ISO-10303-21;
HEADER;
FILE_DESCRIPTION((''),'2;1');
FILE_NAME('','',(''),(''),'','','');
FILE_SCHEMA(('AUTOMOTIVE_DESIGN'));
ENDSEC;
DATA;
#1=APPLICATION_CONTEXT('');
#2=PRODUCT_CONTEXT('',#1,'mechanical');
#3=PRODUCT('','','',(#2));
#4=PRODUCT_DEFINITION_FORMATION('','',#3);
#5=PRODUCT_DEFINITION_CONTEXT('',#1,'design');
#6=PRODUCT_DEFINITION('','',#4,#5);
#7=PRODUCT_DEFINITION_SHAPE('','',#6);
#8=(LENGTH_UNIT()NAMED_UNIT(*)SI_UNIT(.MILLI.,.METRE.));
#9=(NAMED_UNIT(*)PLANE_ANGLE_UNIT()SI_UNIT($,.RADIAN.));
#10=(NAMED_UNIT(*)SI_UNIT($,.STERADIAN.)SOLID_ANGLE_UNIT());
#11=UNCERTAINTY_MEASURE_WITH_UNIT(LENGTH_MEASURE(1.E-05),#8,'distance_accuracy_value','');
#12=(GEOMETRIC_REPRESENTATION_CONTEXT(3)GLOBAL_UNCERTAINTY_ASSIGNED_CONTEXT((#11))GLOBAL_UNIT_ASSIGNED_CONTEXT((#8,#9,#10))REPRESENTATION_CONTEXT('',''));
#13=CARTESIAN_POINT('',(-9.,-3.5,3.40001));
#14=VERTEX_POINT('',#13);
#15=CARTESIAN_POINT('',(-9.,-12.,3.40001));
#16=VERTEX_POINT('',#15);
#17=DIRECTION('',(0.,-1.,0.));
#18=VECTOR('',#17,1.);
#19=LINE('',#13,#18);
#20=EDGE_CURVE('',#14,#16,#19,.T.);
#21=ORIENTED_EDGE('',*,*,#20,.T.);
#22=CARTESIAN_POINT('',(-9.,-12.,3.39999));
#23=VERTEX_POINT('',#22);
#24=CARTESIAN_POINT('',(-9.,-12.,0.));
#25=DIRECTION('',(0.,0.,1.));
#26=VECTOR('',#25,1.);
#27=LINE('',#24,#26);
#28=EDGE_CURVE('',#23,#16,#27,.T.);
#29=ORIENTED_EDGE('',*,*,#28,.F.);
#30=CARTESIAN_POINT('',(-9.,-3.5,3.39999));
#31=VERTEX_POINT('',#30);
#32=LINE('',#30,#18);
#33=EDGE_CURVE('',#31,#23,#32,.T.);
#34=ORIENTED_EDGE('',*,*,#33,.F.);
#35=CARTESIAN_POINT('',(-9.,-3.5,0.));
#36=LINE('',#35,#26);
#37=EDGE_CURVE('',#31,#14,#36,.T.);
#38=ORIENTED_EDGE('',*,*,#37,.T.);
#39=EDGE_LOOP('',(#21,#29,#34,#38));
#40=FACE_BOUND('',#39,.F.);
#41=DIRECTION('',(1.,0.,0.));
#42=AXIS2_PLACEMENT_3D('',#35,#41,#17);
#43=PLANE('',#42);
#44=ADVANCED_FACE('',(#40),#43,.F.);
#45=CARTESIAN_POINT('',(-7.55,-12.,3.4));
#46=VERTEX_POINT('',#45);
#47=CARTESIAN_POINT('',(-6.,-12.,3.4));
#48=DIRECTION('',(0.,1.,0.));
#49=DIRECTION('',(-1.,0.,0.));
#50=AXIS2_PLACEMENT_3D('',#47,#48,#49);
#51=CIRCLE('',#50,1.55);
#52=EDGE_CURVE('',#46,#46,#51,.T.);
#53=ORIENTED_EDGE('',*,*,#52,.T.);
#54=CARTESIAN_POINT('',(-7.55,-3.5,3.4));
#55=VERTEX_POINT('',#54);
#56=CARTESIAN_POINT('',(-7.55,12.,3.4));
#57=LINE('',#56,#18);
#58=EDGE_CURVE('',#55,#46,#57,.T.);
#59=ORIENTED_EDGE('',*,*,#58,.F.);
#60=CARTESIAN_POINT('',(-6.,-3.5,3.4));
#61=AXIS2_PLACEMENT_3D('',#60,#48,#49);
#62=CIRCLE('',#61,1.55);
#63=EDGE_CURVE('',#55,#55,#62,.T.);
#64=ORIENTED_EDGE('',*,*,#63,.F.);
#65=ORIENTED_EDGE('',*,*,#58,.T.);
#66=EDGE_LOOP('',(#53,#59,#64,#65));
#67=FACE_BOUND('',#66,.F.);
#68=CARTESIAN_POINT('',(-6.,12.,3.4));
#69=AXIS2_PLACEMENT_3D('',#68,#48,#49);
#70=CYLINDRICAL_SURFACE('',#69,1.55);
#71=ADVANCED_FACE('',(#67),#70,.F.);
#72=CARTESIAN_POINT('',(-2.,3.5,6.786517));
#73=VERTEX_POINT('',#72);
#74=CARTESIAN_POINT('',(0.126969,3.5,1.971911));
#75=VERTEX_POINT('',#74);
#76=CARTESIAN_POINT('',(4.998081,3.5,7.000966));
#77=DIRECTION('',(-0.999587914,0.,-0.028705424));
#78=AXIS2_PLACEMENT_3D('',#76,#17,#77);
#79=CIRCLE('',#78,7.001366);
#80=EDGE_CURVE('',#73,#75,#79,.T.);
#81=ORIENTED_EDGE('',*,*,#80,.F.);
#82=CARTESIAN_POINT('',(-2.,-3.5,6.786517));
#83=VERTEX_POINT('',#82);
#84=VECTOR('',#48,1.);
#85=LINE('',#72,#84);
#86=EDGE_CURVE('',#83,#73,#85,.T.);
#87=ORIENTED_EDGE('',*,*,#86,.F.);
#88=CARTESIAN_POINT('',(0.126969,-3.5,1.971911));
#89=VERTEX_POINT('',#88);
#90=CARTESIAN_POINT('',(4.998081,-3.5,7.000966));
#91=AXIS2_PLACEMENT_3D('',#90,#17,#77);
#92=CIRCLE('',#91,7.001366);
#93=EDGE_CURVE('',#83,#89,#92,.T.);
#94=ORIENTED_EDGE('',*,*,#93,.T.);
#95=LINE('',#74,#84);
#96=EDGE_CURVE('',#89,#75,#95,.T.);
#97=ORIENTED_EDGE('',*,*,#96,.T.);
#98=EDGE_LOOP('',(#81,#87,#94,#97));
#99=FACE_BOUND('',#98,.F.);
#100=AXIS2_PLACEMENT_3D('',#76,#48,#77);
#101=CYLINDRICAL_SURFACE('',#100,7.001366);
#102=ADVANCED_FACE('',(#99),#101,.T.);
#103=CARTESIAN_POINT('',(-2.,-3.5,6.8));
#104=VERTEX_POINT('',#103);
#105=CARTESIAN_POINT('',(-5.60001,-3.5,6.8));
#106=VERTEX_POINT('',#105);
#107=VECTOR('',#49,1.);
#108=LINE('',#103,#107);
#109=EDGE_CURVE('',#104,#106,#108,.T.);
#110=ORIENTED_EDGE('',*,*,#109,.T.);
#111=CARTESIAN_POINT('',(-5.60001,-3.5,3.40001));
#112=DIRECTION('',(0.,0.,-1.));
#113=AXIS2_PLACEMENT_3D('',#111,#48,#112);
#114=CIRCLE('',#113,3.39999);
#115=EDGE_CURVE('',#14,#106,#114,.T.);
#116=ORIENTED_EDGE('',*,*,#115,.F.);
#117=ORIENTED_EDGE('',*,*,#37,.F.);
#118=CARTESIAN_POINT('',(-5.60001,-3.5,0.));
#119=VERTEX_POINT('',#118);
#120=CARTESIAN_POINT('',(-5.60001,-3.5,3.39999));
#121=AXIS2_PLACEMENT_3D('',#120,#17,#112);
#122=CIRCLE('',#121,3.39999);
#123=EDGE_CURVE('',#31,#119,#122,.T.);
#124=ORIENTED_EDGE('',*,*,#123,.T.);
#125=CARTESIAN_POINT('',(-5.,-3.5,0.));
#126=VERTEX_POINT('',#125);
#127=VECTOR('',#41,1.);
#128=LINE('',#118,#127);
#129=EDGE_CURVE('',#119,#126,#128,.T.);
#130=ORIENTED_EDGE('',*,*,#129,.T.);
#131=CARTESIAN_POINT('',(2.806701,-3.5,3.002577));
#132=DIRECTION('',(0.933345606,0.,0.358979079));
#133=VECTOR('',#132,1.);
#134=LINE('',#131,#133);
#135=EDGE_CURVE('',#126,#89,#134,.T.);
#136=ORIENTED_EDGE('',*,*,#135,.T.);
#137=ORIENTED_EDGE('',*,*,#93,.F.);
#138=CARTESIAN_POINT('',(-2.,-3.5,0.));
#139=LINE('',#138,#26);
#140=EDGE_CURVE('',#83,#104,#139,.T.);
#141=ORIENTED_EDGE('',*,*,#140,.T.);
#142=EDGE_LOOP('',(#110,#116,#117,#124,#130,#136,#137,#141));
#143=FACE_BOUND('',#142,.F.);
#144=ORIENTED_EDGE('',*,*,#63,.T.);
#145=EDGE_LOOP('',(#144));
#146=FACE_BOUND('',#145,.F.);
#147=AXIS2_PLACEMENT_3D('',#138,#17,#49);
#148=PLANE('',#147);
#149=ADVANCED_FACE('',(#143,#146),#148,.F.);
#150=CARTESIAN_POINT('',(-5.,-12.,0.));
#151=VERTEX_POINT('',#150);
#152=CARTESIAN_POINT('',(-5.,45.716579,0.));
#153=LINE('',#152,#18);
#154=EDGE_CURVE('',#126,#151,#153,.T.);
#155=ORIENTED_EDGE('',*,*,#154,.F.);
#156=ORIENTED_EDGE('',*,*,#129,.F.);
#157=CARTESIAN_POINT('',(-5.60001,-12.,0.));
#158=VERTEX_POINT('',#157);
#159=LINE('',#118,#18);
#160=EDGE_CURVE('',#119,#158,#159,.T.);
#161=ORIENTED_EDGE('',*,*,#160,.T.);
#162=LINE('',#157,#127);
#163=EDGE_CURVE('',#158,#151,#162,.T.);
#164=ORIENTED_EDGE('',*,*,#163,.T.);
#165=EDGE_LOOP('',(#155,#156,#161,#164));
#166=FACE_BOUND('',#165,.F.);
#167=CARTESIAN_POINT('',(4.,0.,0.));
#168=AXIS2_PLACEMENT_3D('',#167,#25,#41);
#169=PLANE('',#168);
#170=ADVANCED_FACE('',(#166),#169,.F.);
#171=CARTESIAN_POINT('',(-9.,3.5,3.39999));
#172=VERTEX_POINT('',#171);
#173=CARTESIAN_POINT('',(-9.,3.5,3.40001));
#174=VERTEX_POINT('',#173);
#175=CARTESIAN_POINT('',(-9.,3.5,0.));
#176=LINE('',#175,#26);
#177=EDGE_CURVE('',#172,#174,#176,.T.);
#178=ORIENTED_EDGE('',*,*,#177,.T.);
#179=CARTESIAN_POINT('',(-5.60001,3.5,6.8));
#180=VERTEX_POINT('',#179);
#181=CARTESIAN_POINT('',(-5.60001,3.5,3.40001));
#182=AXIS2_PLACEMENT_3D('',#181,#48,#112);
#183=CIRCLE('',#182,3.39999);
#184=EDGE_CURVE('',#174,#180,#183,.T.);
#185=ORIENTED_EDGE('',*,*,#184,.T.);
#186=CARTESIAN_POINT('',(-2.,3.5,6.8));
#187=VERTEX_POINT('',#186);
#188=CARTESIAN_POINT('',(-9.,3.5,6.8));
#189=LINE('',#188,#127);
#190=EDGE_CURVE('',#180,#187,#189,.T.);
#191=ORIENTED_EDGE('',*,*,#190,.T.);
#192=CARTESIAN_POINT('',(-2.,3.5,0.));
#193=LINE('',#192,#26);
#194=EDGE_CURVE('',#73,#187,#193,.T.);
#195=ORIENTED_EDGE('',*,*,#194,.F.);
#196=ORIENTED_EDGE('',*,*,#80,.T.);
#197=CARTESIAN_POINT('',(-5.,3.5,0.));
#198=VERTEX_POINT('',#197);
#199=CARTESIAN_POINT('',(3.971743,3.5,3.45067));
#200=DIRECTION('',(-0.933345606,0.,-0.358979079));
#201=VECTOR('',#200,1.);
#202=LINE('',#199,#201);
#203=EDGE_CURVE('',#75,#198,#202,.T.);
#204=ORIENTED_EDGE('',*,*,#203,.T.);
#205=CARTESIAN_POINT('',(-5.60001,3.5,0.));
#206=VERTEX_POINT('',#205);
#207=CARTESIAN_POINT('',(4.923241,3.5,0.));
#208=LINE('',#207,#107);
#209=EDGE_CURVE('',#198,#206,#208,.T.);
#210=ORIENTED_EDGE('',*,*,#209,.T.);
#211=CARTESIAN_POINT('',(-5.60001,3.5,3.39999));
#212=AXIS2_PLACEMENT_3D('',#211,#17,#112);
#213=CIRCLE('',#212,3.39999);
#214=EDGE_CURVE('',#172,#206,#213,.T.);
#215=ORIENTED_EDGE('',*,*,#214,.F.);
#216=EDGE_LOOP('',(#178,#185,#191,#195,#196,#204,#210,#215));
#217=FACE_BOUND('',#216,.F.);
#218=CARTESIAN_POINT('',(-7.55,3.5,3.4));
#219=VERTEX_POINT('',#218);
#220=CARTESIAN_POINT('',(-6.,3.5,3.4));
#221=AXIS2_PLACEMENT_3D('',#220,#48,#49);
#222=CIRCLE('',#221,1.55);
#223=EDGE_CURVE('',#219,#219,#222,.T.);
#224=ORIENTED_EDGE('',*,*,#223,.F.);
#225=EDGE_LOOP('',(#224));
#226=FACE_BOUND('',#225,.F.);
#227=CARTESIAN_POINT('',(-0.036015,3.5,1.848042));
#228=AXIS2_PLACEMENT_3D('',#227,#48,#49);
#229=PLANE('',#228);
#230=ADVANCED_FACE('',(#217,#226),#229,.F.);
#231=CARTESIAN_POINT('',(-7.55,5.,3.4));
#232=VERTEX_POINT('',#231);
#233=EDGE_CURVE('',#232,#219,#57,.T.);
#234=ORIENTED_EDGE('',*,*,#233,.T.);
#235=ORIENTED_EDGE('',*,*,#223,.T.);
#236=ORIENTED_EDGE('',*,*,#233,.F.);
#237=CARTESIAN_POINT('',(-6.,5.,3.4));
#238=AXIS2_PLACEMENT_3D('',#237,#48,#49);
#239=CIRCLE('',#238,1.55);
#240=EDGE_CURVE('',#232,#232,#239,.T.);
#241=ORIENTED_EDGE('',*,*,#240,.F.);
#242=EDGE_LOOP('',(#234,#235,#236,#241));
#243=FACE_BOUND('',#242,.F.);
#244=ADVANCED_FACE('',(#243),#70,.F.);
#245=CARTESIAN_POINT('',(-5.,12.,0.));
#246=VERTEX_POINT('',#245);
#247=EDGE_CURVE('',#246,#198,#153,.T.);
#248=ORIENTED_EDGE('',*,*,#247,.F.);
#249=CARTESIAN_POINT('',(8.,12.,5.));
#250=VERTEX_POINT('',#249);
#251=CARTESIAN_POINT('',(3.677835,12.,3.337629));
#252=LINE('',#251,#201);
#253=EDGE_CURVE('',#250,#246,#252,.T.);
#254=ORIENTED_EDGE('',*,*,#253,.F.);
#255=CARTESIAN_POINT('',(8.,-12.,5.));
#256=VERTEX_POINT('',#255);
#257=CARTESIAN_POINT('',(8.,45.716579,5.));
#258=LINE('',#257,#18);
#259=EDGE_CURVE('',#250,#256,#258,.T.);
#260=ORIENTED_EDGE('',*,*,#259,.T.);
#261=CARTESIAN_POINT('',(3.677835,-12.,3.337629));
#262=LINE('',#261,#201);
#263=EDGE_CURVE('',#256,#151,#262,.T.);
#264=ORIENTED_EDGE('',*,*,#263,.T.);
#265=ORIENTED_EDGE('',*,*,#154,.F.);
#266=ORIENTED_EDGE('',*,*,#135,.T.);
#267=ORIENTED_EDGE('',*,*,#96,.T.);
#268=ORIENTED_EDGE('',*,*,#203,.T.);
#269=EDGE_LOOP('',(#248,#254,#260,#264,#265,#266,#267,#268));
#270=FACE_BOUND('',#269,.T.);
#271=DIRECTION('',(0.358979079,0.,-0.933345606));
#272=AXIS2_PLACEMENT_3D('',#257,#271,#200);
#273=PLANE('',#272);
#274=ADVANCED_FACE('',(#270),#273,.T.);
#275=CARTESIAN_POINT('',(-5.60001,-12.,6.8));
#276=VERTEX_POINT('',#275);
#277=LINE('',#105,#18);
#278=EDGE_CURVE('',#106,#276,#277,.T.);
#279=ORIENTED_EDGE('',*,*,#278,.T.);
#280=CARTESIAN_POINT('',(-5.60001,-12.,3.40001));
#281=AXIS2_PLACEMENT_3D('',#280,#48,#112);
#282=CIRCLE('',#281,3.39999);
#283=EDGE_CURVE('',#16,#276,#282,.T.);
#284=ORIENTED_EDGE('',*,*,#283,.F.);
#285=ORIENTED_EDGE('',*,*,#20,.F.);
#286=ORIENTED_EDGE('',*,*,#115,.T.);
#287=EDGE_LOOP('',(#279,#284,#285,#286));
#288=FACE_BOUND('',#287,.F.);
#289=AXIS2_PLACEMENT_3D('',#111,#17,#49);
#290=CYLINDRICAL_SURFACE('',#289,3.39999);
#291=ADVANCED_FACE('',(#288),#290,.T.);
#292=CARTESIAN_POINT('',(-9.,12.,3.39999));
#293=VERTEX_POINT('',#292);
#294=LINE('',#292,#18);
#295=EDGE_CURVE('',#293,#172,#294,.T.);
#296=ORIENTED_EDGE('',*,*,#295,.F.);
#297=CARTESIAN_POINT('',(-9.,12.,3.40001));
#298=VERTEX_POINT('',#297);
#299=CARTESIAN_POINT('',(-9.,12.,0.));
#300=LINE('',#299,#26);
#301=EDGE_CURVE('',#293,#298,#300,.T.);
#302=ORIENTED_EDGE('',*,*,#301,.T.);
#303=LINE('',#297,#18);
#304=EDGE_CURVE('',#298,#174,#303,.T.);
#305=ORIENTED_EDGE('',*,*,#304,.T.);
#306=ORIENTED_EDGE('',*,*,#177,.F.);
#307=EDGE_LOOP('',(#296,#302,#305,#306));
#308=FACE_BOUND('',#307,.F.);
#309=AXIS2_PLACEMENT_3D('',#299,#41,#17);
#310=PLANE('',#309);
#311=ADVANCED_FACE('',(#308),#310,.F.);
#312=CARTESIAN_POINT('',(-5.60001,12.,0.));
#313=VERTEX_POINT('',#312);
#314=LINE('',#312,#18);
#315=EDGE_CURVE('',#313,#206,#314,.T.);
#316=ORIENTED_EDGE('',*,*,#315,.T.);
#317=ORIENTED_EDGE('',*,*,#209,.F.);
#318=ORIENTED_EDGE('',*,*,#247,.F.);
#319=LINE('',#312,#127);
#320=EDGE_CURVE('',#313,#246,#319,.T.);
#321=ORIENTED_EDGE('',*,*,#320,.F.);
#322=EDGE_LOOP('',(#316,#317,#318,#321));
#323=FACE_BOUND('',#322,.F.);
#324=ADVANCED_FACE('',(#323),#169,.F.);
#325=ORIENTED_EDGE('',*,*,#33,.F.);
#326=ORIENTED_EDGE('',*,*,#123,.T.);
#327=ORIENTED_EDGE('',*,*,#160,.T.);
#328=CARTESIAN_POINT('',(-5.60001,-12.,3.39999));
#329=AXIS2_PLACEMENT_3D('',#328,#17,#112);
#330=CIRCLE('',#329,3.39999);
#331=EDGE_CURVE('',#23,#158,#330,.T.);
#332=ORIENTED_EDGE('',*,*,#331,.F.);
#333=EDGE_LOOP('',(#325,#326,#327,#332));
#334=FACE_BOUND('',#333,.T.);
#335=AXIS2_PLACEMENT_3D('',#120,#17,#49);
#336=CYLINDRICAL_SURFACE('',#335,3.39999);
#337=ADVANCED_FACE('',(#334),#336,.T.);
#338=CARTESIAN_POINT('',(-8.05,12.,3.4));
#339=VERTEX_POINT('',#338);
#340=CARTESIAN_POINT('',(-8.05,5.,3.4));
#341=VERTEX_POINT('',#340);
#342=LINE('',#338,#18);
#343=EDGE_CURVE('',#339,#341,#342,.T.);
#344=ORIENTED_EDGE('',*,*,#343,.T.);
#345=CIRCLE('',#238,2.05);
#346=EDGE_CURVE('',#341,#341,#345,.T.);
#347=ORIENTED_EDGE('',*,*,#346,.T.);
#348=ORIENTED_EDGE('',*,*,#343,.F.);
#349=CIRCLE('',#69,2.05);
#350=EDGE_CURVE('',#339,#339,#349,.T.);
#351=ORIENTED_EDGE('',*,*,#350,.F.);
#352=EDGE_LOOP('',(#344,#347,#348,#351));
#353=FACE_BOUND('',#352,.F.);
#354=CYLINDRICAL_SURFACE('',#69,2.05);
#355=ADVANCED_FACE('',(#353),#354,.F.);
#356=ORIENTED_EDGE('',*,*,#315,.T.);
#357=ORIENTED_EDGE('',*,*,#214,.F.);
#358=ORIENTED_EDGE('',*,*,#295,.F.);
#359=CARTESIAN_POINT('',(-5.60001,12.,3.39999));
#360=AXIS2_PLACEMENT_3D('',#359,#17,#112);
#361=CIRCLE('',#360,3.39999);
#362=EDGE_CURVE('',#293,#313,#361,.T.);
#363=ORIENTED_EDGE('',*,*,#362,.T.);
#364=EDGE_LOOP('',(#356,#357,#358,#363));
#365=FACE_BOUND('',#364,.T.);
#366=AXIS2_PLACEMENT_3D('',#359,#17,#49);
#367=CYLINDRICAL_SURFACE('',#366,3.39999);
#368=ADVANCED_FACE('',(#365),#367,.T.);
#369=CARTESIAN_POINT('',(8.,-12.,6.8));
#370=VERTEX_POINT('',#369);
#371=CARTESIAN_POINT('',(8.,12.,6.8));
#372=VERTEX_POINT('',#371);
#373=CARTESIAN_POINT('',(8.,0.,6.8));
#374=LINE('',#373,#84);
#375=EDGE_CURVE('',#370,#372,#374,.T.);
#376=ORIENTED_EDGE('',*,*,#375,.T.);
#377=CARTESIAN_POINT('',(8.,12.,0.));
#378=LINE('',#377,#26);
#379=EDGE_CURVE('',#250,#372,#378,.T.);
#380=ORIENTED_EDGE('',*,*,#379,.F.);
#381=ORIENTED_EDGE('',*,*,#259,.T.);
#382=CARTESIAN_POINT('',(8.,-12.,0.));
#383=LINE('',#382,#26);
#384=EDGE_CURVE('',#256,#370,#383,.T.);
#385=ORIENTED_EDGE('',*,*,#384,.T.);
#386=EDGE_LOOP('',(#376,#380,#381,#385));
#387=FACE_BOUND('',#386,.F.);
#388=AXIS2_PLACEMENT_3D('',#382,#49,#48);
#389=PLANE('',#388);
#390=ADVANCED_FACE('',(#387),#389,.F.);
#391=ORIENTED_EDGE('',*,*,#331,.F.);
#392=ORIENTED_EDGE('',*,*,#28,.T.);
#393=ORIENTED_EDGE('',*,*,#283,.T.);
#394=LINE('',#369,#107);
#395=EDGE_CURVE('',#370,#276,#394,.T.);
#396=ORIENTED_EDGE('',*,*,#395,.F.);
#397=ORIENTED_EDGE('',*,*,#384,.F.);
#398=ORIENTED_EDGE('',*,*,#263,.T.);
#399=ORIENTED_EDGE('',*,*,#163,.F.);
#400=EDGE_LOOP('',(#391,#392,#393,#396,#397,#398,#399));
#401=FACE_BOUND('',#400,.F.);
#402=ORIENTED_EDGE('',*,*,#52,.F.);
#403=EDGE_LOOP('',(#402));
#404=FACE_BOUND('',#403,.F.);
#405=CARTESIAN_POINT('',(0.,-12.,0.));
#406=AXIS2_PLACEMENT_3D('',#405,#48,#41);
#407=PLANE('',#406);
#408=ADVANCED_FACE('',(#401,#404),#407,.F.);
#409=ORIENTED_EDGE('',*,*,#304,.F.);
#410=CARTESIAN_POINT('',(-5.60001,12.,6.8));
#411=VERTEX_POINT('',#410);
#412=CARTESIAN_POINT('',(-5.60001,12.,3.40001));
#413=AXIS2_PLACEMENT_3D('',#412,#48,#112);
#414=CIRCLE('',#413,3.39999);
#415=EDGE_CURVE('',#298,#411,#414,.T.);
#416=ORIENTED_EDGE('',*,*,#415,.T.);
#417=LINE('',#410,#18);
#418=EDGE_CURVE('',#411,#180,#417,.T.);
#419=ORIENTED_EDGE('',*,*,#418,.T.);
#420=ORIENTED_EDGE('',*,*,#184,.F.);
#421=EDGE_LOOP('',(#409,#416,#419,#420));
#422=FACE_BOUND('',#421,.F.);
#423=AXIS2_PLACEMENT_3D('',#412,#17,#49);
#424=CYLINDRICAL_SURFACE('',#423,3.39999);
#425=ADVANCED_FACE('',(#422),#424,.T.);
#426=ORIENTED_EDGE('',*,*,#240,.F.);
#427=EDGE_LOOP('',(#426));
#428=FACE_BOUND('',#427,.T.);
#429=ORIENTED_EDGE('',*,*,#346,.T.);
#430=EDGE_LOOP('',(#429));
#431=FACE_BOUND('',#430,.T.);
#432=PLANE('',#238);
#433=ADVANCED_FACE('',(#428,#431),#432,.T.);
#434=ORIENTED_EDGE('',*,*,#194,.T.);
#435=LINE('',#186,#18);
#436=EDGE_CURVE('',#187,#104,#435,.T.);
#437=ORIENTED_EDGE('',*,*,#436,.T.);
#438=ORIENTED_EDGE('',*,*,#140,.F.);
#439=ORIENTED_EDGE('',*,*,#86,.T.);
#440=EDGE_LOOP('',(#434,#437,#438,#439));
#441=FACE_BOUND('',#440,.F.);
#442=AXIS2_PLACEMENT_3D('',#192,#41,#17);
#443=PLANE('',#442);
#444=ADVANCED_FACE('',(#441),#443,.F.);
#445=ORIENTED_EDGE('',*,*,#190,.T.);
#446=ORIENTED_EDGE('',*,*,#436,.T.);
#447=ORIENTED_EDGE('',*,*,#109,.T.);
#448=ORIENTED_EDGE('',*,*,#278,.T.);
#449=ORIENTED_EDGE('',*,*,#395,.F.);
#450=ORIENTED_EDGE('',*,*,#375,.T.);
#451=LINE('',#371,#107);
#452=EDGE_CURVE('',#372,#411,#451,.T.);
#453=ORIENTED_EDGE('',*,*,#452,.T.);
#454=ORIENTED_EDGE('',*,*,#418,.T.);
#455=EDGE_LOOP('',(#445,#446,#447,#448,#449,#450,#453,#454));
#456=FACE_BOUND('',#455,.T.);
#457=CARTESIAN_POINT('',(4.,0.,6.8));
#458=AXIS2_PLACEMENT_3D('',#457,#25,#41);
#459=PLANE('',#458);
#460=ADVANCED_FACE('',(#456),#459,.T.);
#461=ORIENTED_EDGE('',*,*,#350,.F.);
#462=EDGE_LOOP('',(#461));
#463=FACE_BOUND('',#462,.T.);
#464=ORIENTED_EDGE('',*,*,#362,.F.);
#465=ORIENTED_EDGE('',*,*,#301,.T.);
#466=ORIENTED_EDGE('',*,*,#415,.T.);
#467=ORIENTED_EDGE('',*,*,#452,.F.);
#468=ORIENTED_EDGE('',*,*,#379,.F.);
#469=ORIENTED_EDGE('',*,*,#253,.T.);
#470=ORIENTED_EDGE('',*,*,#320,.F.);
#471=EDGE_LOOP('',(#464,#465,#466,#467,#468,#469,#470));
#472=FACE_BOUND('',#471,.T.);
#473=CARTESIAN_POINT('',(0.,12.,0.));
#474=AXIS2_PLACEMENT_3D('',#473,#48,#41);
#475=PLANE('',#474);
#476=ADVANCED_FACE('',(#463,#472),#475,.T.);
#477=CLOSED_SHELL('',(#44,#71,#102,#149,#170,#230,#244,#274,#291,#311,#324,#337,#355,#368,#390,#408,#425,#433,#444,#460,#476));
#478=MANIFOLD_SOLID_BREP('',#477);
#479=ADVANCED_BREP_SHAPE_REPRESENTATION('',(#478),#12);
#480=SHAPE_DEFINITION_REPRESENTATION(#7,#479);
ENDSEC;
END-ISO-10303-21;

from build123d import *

# Parameters (mm, degrees)
F1_DEPTH    = 6.8
F2_R        = 3.39999
F3_R        = 1.55
F4_DEPTH    = 24.001
F3_R_2      = 2.05
F5_DEPTH    = 7
F0_W        = 8
F0_H        = 24
F6_DEPTH    = 6.8
F7_T1_DEPTH = 7
F8_T1_DEPTH = 91.4331581264


# Not quite as in the source:
# - a fillet or chamfer that OpenCascade refuses, or shapes differently, is made with other operations: its cross-section is extruded or revolved along the edge and cut away or added
# - a fillet or chamfer is up to 0.001 mm smaller than in the source, because OpenCascade refuses the exact size
# - a feature names something its author has since deleted; it is built from what else it names


with BuildPart() as f1:
    # F0 (on Top) → F1 (new body)
    with BuildSketch(Plane.XY):
        Polygon((-2, -12), (0, -12), (0, 12), (-2, 12), (-9, 12), (-9, 3.5), (-2, 3.5), (-2, -3.5), (-9, -3.5), (-9, -12), align=None)
    extrude(amount=F1_DEPTH)

    # F2 (radius 3.4 in the source; OpenCascade refuses exactly that, so slightly less here)
    f2_edges = [f1.edges().sort_by_distance(p)[0] for p in [
        (-9, 7.75, 6.8),
        (-9, 7.75, 0),
        (-9, -7.75, 0),
        (-9, -7.75, 6.8),
    ]]
    fillet(f2_edges, radius=F2_R)

    # F3 (on face) → F4 (cut, through all)
    with BuildSketch(Plane(origin=(0, 12, 0), x_dir=(-1, 0, 0), z_dir=(0, 1, 0))):
        with Locations((6, 3.4)):
            Circle(F3_R)
    extrude(amount=-F4_DEPTH, mode=Mode.SUBTRACT)

    # F3 (on face) → F5 (cut)
    with BuildSketch(Plane(origin=(0, 12, 0), x_dir=(-1, 0, 0), z_dir=(0, 1, 0))):
        with Locations((6, 3.4)):
            Circle(F3_R_2)
        with Locations((6, 3.4)):
            Circle(F3_R, mode=Mode.SUBTRACT)
    extrude(amount=-F5_DEPTH, mode=Mode.SUBTRACT)

    # F0 (on Top) → F6 (join, through all)
    with BuildSketch(Plane.XY):
        with Locations((4, 0)):
            Rectangle(F0_W, F0_H)
    extrude(amount=F6_DEPTH)

    # F7: fillet of radius 7 on 1 edges, made by hand

    # F7_s2 → F7_t1 (cut)
    with BuildSketch(Plane.XZ.offset(-3.5)):
        with BuildLine():
            ThreePointArc((-2.0003998352, 6.7999885178), (0.1189410708, 1.9796991069), (4.9980806884, -0.0004))
            Line((4.9980806884, -0.0004), (4.9980806884, -0.7005365685))
            ThreePointArc((4.9980806884, -0.7005365685), (1.4990403442, -0.7001365685), (-2, -0.7001365685))
            Line((-2, -0.7001365685), (-2.7001365685, 0))
            ThreePointArc((-2.7001365685, 0), (-2.7001365685, 3.3999942589), (-2.7002478875, 6.7798908011))
            Line((-2.7002478875, 6.7798908011), (-2.0003998352, 6.7999885178))
        make_face()
    extrude(amount=F7_T1_DEPTH, mode=Mode.SUBTRACT)

    # F8: chamfer of 5 x 13 on 1 edges, made by hand

    # F8_s2 → F8_t1 (cut)
    with BuildSketch(Plane.XZ.offset(-45.7165790632)):
        Polygon((8, 5), (-5, 0), (8, 0), align=None)
    extrude(amount=F8_T1_DEPTH, mode=Mode.SUBTRACT)


solid = f1.part
